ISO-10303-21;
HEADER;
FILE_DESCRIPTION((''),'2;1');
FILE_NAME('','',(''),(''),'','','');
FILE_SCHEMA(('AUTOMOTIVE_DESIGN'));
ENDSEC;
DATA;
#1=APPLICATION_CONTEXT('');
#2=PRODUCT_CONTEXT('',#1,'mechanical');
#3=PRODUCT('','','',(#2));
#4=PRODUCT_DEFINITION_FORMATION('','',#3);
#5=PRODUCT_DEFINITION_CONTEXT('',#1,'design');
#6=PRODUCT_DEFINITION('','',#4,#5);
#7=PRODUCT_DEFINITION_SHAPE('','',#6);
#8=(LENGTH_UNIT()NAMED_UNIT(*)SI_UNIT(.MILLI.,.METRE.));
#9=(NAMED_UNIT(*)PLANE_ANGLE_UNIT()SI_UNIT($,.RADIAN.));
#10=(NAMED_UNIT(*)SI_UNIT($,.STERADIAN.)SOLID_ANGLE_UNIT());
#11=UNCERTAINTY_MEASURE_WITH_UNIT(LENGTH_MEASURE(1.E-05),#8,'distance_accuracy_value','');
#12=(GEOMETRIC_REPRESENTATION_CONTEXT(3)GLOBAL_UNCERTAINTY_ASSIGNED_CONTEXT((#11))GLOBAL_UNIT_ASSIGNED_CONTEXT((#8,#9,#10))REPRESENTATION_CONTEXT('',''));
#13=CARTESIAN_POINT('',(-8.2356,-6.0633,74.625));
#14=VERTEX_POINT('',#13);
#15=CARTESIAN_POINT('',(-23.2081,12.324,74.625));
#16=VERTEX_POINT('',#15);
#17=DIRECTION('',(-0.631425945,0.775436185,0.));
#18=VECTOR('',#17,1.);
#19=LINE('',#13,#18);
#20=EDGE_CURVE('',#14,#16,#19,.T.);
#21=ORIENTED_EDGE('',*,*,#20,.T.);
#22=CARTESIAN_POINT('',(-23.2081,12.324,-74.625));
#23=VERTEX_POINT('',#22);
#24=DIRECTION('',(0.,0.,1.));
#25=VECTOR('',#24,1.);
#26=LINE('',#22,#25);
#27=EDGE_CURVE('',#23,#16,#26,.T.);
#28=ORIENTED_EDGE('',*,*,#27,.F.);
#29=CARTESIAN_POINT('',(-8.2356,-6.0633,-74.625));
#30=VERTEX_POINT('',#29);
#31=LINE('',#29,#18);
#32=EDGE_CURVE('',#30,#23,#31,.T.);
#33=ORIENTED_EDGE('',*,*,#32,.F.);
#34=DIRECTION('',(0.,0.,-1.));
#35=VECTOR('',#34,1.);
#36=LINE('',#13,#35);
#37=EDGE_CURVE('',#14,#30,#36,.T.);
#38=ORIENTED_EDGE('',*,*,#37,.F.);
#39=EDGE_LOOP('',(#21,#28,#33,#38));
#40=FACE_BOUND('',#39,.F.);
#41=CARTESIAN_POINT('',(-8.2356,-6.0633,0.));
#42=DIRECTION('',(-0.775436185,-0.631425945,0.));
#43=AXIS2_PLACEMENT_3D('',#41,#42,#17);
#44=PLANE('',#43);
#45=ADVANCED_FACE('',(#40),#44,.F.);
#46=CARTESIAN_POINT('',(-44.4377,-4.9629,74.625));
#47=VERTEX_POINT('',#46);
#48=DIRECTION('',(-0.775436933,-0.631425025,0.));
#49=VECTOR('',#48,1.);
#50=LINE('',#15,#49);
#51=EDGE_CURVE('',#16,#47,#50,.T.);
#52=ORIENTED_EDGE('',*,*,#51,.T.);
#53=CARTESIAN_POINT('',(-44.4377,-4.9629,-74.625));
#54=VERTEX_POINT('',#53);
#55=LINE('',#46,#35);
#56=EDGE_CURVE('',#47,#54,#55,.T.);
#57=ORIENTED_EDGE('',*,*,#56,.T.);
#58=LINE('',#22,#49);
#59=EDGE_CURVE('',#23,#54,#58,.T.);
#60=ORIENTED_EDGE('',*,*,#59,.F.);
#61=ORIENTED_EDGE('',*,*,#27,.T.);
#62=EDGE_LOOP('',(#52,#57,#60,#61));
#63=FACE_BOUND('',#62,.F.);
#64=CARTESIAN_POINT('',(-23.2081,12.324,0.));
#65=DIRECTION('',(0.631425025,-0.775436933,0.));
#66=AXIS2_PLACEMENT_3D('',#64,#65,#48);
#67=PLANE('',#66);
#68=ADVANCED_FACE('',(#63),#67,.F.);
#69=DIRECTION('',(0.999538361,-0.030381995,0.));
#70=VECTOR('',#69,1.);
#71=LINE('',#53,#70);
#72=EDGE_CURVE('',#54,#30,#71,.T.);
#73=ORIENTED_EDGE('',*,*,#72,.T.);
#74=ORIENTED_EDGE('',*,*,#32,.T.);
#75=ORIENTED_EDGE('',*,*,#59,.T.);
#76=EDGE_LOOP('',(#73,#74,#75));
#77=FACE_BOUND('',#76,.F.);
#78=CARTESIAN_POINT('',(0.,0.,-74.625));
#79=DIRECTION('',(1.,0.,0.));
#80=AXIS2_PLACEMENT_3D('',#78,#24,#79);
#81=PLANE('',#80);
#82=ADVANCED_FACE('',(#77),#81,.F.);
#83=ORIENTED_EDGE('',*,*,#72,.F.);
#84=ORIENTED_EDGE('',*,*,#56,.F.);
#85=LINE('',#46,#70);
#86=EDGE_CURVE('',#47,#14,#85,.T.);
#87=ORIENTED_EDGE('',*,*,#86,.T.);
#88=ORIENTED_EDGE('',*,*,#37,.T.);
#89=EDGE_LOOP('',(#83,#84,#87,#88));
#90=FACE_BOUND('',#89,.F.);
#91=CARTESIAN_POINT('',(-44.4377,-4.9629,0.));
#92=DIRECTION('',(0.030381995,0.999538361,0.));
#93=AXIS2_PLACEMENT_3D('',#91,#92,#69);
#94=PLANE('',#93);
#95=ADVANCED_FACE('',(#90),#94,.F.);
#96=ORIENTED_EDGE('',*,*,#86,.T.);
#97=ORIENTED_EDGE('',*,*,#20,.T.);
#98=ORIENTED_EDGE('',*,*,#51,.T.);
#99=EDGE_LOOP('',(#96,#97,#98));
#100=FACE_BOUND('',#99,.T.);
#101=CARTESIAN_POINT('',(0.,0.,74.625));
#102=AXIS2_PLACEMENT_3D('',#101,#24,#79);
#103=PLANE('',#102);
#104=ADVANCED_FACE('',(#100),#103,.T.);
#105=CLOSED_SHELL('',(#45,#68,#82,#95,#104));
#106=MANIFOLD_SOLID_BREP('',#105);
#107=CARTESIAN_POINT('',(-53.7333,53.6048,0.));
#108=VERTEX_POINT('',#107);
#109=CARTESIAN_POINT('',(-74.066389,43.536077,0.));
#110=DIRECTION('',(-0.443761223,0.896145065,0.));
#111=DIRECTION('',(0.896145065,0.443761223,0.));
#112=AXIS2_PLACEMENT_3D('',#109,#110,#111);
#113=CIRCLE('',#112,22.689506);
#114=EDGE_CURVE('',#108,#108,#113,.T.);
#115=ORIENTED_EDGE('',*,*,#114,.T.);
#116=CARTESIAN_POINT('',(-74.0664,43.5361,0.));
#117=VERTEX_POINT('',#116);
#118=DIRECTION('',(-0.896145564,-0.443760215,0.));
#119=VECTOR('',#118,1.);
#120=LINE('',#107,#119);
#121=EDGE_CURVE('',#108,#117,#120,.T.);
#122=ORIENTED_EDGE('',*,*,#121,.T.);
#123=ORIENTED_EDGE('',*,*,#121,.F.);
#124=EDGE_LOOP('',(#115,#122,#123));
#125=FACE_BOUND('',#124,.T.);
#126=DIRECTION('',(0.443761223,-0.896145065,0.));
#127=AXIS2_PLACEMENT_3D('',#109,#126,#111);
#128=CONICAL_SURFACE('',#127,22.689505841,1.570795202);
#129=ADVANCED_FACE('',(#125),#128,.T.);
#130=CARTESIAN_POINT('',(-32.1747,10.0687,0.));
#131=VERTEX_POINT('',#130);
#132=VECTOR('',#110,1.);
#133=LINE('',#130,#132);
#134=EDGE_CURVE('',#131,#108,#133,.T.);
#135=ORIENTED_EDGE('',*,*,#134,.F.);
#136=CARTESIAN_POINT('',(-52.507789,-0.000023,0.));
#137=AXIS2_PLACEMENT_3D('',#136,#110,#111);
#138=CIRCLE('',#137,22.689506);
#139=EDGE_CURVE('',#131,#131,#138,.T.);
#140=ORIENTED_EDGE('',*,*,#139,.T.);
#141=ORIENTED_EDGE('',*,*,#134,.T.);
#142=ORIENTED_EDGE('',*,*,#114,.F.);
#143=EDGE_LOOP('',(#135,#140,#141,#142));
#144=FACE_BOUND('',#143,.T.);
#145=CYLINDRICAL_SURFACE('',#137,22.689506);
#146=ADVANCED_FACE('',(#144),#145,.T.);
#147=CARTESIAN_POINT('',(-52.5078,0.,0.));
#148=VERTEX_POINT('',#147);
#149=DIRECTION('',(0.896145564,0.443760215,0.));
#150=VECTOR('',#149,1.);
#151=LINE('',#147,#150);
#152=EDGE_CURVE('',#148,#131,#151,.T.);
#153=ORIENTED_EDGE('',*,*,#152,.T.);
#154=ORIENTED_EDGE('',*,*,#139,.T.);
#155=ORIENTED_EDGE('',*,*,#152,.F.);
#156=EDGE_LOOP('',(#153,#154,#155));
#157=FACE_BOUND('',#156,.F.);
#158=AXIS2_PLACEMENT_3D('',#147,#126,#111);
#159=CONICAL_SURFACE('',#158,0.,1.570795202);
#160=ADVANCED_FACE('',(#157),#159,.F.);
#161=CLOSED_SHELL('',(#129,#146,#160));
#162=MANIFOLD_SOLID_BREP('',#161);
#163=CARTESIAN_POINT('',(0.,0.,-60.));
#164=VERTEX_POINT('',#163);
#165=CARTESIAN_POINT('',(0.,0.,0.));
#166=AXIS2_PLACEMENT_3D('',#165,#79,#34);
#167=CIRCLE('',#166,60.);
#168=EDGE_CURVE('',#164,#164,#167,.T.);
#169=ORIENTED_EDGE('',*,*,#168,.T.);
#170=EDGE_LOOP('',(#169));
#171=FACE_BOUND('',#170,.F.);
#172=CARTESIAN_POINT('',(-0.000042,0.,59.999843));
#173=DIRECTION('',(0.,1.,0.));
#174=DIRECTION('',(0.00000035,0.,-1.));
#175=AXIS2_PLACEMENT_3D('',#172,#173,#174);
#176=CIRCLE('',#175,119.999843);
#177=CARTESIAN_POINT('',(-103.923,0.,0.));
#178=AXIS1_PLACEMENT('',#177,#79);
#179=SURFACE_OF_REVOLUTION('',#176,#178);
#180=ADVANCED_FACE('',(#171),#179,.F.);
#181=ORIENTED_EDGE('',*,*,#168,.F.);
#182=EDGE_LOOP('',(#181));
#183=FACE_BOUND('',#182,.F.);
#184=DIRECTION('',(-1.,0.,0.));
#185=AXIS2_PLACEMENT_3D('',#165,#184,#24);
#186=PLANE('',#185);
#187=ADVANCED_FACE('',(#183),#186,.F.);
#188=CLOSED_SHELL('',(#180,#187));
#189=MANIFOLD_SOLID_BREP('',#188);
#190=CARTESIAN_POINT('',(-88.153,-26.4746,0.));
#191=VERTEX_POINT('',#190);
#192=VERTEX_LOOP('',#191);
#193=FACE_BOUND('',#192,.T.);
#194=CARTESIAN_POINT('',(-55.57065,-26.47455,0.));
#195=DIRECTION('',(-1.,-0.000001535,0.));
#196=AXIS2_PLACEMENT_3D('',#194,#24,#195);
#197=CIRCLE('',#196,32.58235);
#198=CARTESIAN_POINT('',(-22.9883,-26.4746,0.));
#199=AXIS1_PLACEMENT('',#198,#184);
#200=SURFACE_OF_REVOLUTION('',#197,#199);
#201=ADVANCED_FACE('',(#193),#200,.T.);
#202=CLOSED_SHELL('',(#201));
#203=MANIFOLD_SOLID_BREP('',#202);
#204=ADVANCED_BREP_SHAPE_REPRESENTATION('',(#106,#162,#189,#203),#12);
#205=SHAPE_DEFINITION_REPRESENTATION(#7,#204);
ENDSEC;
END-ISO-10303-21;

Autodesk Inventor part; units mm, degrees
ref_plane "YZ Plane" through (0, 0, 0) normal (1, 0, 0) x (0, 1, 0)
ref_plane "XZ Plane" through (0, 0, 0) normal (0, 1, 0) x (-1, 0, 0)
ref_plane "XY Plane" through (0, 0, 0) normal (0, 0, 1) x (1, 0, 0)
sketch "Эскиз1" plane through (0, 0, 0) normal (0, 1, 0) x (-1, 0, 0)
  line L0 (0, 0) -> (0, -60)
  arc A0 (0, -60) -> (103.923, 0) centre (0, 60) ccw
  line L1 (103.923, 0) -> (0, 0)
  dimension "d0" = 60
revolve "Вращение1" add sketch "Эскиз1" angle 360 about axis through (-103.923, 0, 0) along (1, 0, 0)
sketch "Эскиз2" plane through (0, 0, 0) normal (0, 0, 1) x (1, 0, 0)
  line L0 (-23.2081, 12.324) -> (-44.4377, -4.9629)
  line L1 (-44.4377, -4.9629) -> (-8.2356, -6.0633)
  line L2 (-8.2356, -6.0633) -> (-23.2081, 12.324)
  point P0 (0, 0)
extrude "Выдавливание1" add sketch "Эскиз2" along normal mid plane 149.25 separate body
sketch "Эскиз3" plane through (0, 0, 0) normal (0, 0, 1) x (1, 0, 0)
  line L0 (-52.5078, 0) -> (-32.1747, 10.0687)
  line L1 (-32.1747, 10.0687) -> (-53.7333, 53.6048)
  line L2 (-53.7333, 53.6048) -> (-74.0664, 43.5361)
  line L3 (-52.5078, 0) -> (-74.0664, 43.5361)
  point P0 (0, 0)
revolve "Вращение2" add sketch "Эскиз3" angle 360 about axis through (-52.5078, 0, 0) along (-0.4437612, 0.8961451, 0) separate body
sketch "Эскиз4" plane through (0, 0, 0) normal (0, 0, 1) x (1, 0, 0)
  arc A0 (-88.153, -26.4746) -> (-22.9883, -26.4746) centre (-55.5707, -26.4746) ccw
  line L0 (-22.9883, -26.4746) -> (-88.153, -26.4746)
  point P0 (0, 0)
revolve "Вращение3" add sketch "Эскиз4" angle 360 about axis through (-22.9883, -26.4746, 0) along (-1, 0, 0) separate body
properties part number "Основа"
